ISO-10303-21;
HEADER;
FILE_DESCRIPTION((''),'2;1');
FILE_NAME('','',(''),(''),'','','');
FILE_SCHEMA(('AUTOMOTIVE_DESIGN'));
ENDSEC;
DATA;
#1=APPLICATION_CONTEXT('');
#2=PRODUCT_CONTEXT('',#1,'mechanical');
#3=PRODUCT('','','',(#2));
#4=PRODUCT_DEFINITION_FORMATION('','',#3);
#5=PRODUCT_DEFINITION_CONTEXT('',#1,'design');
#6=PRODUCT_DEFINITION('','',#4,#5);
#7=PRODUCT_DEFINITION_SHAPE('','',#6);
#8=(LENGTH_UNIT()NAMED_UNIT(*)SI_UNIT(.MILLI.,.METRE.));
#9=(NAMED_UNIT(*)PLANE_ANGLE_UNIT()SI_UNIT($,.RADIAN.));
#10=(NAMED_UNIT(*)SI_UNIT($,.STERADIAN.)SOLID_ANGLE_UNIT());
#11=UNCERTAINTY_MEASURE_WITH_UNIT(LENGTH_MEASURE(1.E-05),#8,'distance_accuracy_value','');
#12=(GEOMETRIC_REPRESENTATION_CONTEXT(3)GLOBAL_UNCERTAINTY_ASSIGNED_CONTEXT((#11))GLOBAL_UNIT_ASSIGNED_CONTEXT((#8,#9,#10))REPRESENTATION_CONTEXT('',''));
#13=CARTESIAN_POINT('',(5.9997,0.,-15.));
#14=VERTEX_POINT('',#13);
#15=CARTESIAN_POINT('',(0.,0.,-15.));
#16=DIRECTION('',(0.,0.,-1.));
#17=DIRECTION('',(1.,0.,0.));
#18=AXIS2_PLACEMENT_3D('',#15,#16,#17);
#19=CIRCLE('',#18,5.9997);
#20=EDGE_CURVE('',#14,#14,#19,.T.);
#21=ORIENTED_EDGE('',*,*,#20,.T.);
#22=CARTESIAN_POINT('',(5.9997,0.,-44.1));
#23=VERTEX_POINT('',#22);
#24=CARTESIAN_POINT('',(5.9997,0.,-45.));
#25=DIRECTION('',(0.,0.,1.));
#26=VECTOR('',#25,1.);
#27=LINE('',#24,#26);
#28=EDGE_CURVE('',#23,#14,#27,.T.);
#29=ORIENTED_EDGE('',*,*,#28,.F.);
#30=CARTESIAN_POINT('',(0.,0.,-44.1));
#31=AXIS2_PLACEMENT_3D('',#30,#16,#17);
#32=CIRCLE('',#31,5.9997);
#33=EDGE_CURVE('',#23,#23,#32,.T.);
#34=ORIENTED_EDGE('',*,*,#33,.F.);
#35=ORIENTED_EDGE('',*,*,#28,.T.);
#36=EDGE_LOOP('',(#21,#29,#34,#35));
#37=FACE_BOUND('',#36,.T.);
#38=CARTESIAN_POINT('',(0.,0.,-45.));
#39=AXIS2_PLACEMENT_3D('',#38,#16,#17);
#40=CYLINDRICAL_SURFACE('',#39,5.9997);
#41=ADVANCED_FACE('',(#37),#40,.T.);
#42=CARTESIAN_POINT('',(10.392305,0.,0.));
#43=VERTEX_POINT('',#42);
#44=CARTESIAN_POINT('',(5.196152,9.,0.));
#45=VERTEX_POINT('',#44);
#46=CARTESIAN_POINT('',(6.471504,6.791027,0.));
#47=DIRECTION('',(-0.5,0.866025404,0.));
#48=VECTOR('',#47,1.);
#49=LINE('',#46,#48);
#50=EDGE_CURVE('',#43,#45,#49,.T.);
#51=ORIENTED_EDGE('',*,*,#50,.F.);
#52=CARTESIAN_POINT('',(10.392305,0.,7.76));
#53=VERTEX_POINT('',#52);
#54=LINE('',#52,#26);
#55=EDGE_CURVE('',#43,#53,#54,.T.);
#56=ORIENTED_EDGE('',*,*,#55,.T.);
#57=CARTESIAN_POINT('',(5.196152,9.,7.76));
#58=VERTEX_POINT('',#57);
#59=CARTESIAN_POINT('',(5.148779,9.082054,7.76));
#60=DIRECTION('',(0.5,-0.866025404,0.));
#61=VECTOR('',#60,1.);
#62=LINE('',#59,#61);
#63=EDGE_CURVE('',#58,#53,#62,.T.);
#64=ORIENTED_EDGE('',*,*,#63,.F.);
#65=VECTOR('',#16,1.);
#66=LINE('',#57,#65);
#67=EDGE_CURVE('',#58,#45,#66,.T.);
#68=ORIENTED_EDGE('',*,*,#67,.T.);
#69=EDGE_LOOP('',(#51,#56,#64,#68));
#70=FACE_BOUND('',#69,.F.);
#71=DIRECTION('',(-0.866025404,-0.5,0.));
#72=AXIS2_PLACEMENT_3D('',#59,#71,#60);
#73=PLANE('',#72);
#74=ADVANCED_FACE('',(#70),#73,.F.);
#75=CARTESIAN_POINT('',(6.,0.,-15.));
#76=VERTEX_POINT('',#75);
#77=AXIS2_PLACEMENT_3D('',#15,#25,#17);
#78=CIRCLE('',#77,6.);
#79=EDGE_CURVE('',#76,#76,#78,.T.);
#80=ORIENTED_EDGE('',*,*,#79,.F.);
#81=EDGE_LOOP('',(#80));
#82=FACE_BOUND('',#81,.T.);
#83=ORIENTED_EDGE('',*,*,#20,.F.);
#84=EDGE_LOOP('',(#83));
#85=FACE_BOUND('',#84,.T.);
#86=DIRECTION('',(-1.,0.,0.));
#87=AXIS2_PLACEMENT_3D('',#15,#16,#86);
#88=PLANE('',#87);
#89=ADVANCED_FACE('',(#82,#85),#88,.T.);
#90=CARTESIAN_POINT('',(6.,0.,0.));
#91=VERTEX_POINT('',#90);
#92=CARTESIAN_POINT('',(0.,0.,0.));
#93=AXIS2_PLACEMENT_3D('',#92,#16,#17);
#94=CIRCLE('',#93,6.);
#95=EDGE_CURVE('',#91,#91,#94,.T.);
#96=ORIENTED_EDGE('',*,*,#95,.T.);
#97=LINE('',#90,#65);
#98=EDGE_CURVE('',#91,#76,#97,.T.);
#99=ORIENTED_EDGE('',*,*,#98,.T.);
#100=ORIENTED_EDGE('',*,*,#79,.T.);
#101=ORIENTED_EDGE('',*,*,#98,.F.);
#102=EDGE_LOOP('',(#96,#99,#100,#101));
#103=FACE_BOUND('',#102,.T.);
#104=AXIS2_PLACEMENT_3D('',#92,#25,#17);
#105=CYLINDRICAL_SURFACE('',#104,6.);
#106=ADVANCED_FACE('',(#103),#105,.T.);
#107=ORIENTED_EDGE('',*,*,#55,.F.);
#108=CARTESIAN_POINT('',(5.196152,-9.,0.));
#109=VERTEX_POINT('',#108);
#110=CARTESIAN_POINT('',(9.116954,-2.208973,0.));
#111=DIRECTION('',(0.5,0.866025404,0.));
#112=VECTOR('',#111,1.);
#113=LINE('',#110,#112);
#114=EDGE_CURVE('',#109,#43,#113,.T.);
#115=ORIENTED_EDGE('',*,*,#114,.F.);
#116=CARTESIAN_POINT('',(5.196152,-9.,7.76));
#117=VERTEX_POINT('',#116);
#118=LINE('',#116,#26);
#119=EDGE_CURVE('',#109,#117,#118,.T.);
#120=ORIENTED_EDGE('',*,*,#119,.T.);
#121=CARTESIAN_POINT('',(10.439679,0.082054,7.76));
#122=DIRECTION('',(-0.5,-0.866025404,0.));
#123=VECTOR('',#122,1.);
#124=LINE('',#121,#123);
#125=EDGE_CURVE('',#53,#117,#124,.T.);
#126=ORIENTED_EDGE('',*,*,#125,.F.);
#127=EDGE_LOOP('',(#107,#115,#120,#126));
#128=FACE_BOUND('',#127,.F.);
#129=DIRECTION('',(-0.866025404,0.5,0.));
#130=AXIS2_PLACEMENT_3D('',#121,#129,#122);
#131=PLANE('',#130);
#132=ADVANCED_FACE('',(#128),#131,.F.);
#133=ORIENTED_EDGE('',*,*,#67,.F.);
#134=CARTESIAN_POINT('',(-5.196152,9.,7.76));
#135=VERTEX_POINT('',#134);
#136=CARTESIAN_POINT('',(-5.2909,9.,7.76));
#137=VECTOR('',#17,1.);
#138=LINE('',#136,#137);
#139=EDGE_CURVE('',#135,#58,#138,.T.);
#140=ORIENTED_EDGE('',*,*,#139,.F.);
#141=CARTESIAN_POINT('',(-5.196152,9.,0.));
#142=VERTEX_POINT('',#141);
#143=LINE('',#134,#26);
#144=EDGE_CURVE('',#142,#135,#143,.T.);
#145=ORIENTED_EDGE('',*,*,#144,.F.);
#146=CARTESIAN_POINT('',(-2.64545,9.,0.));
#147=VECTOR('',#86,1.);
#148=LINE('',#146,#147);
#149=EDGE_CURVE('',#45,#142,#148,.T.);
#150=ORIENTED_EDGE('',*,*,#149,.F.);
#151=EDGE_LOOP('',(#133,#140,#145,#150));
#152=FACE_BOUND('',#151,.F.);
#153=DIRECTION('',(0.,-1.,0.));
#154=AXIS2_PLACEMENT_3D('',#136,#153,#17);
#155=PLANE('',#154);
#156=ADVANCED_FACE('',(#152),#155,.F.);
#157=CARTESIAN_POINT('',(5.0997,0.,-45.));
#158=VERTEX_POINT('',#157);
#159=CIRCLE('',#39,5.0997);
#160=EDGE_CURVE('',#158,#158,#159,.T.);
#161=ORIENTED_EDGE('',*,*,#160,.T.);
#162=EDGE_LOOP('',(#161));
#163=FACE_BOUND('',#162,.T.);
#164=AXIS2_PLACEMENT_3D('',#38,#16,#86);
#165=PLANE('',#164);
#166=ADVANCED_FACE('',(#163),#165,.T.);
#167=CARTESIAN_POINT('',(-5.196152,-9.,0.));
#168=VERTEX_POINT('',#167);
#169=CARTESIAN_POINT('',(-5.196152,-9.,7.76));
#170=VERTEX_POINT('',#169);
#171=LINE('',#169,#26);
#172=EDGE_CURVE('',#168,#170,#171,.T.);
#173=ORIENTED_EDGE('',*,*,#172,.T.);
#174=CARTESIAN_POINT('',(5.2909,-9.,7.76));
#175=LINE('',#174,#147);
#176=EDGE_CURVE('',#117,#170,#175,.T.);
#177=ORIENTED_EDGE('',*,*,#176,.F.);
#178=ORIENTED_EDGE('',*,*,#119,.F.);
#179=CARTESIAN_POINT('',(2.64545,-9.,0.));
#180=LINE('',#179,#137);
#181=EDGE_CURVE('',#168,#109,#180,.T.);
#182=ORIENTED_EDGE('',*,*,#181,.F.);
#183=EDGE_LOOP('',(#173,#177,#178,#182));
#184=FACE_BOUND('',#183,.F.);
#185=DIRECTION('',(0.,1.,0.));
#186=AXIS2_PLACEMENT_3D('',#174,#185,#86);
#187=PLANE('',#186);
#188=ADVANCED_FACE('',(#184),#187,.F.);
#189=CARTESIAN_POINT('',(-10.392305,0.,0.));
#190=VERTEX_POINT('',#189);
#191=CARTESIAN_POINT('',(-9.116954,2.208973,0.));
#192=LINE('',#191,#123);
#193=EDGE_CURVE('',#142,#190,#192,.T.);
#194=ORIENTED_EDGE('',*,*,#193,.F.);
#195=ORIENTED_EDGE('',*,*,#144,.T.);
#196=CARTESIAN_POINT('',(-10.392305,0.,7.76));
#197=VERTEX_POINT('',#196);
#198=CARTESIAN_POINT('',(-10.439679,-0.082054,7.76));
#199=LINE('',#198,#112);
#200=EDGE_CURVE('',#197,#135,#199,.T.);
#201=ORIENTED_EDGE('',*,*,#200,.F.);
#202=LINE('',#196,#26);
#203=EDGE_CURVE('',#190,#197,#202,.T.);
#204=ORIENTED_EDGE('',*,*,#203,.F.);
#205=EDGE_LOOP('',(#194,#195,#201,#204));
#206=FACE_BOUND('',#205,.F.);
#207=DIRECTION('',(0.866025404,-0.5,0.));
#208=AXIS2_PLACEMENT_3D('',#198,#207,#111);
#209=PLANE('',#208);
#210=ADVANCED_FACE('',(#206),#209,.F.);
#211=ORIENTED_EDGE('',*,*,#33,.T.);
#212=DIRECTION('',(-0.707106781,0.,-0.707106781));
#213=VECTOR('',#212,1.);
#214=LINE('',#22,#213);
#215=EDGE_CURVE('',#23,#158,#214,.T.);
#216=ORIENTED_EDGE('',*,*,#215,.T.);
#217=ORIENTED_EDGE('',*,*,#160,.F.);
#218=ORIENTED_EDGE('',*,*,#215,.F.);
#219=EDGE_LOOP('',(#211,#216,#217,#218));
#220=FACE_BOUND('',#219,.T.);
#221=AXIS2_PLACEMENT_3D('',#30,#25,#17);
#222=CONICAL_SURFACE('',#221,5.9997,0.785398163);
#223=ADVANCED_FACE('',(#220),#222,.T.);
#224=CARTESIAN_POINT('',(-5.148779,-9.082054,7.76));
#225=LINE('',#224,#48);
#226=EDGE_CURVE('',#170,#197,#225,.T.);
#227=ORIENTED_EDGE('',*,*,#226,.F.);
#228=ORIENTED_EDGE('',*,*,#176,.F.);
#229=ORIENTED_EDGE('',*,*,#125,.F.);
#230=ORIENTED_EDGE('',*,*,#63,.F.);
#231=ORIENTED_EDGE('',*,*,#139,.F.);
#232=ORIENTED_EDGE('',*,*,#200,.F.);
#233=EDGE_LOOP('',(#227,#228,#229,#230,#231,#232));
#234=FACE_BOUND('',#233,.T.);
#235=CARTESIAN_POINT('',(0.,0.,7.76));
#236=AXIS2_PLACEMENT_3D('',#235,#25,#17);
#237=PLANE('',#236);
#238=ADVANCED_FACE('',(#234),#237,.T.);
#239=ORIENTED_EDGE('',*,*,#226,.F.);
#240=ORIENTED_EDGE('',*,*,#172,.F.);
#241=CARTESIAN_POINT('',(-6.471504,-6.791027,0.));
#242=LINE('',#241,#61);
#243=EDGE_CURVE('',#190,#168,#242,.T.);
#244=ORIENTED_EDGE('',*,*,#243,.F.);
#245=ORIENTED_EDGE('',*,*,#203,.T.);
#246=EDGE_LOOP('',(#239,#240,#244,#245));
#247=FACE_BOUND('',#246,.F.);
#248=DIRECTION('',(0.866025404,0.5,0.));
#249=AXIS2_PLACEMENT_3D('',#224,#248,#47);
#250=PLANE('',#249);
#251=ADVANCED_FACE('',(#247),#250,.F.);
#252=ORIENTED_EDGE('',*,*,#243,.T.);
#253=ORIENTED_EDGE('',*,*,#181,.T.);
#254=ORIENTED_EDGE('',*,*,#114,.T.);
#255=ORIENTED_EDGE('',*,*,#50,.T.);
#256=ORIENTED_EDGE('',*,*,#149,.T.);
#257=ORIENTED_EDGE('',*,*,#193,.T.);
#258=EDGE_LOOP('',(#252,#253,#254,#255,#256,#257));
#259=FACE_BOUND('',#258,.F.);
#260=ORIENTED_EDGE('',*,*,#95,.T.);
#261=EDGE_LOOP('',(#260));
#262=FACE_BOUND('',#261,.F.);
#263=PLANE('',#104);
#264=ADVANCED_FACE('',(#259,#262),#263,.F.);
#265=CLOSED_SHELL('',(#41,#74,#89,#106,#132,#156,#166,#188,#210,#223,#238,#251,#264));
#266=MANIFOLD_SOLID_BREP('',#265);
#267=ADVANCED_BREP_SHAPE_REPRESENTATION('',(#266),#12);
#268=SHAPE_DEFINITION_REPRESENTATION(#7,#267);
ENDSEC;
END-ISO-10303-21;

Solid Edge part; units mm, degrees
sketch "Sketch1" plane through (0, 0, 0) normal (0, 0, 1) x (1, 0, 0)
  circle A0 centre (0, 0) radius 10.44
  dimension "D1" = 20.88
extrude "Protrusion1" add sketch "Sketch1" along normal blind 7.76
sketch "Sketch2" plane through (0, 0, 0) normal (0, 0, -1) x (1, 0, 0)
  circle A0 centre (0, 0) radius 6
extrude "Protrusion2" add sketch "Sketch2" along normal blind 45
sketch "Sketch3" plane through (0, 0, -45) normal (0, 0, -1) x (1, 0, 0)
  circle A0 centre (0, 0) radius 5.9997
extrude "Cutout1" cut sketch "Sketch3" against normal blind 30 flip side to cut
chamfer "Chamfer_1" distance 0.9 angle 45 1 edges at (-5.9997, 0, -45)
sketch "Sketch4" plane through (0, 0, 7.76) normal (0, 0, 1) x (1, 0, 0)
  line L0 (-5.2909, 9) -> (5.2909, 9)
  dimension "D1" = 18
extrude "Cutout2" cut sketch "Sketch4" against normal up to next material side at (0, 9.05, 7.76)
pattern_circular "Pattern1" count 6 over 360 about axis through (0, 0, 7.76) along (0, 0, 1) of "Cutout2"
properties part number "24104611"
